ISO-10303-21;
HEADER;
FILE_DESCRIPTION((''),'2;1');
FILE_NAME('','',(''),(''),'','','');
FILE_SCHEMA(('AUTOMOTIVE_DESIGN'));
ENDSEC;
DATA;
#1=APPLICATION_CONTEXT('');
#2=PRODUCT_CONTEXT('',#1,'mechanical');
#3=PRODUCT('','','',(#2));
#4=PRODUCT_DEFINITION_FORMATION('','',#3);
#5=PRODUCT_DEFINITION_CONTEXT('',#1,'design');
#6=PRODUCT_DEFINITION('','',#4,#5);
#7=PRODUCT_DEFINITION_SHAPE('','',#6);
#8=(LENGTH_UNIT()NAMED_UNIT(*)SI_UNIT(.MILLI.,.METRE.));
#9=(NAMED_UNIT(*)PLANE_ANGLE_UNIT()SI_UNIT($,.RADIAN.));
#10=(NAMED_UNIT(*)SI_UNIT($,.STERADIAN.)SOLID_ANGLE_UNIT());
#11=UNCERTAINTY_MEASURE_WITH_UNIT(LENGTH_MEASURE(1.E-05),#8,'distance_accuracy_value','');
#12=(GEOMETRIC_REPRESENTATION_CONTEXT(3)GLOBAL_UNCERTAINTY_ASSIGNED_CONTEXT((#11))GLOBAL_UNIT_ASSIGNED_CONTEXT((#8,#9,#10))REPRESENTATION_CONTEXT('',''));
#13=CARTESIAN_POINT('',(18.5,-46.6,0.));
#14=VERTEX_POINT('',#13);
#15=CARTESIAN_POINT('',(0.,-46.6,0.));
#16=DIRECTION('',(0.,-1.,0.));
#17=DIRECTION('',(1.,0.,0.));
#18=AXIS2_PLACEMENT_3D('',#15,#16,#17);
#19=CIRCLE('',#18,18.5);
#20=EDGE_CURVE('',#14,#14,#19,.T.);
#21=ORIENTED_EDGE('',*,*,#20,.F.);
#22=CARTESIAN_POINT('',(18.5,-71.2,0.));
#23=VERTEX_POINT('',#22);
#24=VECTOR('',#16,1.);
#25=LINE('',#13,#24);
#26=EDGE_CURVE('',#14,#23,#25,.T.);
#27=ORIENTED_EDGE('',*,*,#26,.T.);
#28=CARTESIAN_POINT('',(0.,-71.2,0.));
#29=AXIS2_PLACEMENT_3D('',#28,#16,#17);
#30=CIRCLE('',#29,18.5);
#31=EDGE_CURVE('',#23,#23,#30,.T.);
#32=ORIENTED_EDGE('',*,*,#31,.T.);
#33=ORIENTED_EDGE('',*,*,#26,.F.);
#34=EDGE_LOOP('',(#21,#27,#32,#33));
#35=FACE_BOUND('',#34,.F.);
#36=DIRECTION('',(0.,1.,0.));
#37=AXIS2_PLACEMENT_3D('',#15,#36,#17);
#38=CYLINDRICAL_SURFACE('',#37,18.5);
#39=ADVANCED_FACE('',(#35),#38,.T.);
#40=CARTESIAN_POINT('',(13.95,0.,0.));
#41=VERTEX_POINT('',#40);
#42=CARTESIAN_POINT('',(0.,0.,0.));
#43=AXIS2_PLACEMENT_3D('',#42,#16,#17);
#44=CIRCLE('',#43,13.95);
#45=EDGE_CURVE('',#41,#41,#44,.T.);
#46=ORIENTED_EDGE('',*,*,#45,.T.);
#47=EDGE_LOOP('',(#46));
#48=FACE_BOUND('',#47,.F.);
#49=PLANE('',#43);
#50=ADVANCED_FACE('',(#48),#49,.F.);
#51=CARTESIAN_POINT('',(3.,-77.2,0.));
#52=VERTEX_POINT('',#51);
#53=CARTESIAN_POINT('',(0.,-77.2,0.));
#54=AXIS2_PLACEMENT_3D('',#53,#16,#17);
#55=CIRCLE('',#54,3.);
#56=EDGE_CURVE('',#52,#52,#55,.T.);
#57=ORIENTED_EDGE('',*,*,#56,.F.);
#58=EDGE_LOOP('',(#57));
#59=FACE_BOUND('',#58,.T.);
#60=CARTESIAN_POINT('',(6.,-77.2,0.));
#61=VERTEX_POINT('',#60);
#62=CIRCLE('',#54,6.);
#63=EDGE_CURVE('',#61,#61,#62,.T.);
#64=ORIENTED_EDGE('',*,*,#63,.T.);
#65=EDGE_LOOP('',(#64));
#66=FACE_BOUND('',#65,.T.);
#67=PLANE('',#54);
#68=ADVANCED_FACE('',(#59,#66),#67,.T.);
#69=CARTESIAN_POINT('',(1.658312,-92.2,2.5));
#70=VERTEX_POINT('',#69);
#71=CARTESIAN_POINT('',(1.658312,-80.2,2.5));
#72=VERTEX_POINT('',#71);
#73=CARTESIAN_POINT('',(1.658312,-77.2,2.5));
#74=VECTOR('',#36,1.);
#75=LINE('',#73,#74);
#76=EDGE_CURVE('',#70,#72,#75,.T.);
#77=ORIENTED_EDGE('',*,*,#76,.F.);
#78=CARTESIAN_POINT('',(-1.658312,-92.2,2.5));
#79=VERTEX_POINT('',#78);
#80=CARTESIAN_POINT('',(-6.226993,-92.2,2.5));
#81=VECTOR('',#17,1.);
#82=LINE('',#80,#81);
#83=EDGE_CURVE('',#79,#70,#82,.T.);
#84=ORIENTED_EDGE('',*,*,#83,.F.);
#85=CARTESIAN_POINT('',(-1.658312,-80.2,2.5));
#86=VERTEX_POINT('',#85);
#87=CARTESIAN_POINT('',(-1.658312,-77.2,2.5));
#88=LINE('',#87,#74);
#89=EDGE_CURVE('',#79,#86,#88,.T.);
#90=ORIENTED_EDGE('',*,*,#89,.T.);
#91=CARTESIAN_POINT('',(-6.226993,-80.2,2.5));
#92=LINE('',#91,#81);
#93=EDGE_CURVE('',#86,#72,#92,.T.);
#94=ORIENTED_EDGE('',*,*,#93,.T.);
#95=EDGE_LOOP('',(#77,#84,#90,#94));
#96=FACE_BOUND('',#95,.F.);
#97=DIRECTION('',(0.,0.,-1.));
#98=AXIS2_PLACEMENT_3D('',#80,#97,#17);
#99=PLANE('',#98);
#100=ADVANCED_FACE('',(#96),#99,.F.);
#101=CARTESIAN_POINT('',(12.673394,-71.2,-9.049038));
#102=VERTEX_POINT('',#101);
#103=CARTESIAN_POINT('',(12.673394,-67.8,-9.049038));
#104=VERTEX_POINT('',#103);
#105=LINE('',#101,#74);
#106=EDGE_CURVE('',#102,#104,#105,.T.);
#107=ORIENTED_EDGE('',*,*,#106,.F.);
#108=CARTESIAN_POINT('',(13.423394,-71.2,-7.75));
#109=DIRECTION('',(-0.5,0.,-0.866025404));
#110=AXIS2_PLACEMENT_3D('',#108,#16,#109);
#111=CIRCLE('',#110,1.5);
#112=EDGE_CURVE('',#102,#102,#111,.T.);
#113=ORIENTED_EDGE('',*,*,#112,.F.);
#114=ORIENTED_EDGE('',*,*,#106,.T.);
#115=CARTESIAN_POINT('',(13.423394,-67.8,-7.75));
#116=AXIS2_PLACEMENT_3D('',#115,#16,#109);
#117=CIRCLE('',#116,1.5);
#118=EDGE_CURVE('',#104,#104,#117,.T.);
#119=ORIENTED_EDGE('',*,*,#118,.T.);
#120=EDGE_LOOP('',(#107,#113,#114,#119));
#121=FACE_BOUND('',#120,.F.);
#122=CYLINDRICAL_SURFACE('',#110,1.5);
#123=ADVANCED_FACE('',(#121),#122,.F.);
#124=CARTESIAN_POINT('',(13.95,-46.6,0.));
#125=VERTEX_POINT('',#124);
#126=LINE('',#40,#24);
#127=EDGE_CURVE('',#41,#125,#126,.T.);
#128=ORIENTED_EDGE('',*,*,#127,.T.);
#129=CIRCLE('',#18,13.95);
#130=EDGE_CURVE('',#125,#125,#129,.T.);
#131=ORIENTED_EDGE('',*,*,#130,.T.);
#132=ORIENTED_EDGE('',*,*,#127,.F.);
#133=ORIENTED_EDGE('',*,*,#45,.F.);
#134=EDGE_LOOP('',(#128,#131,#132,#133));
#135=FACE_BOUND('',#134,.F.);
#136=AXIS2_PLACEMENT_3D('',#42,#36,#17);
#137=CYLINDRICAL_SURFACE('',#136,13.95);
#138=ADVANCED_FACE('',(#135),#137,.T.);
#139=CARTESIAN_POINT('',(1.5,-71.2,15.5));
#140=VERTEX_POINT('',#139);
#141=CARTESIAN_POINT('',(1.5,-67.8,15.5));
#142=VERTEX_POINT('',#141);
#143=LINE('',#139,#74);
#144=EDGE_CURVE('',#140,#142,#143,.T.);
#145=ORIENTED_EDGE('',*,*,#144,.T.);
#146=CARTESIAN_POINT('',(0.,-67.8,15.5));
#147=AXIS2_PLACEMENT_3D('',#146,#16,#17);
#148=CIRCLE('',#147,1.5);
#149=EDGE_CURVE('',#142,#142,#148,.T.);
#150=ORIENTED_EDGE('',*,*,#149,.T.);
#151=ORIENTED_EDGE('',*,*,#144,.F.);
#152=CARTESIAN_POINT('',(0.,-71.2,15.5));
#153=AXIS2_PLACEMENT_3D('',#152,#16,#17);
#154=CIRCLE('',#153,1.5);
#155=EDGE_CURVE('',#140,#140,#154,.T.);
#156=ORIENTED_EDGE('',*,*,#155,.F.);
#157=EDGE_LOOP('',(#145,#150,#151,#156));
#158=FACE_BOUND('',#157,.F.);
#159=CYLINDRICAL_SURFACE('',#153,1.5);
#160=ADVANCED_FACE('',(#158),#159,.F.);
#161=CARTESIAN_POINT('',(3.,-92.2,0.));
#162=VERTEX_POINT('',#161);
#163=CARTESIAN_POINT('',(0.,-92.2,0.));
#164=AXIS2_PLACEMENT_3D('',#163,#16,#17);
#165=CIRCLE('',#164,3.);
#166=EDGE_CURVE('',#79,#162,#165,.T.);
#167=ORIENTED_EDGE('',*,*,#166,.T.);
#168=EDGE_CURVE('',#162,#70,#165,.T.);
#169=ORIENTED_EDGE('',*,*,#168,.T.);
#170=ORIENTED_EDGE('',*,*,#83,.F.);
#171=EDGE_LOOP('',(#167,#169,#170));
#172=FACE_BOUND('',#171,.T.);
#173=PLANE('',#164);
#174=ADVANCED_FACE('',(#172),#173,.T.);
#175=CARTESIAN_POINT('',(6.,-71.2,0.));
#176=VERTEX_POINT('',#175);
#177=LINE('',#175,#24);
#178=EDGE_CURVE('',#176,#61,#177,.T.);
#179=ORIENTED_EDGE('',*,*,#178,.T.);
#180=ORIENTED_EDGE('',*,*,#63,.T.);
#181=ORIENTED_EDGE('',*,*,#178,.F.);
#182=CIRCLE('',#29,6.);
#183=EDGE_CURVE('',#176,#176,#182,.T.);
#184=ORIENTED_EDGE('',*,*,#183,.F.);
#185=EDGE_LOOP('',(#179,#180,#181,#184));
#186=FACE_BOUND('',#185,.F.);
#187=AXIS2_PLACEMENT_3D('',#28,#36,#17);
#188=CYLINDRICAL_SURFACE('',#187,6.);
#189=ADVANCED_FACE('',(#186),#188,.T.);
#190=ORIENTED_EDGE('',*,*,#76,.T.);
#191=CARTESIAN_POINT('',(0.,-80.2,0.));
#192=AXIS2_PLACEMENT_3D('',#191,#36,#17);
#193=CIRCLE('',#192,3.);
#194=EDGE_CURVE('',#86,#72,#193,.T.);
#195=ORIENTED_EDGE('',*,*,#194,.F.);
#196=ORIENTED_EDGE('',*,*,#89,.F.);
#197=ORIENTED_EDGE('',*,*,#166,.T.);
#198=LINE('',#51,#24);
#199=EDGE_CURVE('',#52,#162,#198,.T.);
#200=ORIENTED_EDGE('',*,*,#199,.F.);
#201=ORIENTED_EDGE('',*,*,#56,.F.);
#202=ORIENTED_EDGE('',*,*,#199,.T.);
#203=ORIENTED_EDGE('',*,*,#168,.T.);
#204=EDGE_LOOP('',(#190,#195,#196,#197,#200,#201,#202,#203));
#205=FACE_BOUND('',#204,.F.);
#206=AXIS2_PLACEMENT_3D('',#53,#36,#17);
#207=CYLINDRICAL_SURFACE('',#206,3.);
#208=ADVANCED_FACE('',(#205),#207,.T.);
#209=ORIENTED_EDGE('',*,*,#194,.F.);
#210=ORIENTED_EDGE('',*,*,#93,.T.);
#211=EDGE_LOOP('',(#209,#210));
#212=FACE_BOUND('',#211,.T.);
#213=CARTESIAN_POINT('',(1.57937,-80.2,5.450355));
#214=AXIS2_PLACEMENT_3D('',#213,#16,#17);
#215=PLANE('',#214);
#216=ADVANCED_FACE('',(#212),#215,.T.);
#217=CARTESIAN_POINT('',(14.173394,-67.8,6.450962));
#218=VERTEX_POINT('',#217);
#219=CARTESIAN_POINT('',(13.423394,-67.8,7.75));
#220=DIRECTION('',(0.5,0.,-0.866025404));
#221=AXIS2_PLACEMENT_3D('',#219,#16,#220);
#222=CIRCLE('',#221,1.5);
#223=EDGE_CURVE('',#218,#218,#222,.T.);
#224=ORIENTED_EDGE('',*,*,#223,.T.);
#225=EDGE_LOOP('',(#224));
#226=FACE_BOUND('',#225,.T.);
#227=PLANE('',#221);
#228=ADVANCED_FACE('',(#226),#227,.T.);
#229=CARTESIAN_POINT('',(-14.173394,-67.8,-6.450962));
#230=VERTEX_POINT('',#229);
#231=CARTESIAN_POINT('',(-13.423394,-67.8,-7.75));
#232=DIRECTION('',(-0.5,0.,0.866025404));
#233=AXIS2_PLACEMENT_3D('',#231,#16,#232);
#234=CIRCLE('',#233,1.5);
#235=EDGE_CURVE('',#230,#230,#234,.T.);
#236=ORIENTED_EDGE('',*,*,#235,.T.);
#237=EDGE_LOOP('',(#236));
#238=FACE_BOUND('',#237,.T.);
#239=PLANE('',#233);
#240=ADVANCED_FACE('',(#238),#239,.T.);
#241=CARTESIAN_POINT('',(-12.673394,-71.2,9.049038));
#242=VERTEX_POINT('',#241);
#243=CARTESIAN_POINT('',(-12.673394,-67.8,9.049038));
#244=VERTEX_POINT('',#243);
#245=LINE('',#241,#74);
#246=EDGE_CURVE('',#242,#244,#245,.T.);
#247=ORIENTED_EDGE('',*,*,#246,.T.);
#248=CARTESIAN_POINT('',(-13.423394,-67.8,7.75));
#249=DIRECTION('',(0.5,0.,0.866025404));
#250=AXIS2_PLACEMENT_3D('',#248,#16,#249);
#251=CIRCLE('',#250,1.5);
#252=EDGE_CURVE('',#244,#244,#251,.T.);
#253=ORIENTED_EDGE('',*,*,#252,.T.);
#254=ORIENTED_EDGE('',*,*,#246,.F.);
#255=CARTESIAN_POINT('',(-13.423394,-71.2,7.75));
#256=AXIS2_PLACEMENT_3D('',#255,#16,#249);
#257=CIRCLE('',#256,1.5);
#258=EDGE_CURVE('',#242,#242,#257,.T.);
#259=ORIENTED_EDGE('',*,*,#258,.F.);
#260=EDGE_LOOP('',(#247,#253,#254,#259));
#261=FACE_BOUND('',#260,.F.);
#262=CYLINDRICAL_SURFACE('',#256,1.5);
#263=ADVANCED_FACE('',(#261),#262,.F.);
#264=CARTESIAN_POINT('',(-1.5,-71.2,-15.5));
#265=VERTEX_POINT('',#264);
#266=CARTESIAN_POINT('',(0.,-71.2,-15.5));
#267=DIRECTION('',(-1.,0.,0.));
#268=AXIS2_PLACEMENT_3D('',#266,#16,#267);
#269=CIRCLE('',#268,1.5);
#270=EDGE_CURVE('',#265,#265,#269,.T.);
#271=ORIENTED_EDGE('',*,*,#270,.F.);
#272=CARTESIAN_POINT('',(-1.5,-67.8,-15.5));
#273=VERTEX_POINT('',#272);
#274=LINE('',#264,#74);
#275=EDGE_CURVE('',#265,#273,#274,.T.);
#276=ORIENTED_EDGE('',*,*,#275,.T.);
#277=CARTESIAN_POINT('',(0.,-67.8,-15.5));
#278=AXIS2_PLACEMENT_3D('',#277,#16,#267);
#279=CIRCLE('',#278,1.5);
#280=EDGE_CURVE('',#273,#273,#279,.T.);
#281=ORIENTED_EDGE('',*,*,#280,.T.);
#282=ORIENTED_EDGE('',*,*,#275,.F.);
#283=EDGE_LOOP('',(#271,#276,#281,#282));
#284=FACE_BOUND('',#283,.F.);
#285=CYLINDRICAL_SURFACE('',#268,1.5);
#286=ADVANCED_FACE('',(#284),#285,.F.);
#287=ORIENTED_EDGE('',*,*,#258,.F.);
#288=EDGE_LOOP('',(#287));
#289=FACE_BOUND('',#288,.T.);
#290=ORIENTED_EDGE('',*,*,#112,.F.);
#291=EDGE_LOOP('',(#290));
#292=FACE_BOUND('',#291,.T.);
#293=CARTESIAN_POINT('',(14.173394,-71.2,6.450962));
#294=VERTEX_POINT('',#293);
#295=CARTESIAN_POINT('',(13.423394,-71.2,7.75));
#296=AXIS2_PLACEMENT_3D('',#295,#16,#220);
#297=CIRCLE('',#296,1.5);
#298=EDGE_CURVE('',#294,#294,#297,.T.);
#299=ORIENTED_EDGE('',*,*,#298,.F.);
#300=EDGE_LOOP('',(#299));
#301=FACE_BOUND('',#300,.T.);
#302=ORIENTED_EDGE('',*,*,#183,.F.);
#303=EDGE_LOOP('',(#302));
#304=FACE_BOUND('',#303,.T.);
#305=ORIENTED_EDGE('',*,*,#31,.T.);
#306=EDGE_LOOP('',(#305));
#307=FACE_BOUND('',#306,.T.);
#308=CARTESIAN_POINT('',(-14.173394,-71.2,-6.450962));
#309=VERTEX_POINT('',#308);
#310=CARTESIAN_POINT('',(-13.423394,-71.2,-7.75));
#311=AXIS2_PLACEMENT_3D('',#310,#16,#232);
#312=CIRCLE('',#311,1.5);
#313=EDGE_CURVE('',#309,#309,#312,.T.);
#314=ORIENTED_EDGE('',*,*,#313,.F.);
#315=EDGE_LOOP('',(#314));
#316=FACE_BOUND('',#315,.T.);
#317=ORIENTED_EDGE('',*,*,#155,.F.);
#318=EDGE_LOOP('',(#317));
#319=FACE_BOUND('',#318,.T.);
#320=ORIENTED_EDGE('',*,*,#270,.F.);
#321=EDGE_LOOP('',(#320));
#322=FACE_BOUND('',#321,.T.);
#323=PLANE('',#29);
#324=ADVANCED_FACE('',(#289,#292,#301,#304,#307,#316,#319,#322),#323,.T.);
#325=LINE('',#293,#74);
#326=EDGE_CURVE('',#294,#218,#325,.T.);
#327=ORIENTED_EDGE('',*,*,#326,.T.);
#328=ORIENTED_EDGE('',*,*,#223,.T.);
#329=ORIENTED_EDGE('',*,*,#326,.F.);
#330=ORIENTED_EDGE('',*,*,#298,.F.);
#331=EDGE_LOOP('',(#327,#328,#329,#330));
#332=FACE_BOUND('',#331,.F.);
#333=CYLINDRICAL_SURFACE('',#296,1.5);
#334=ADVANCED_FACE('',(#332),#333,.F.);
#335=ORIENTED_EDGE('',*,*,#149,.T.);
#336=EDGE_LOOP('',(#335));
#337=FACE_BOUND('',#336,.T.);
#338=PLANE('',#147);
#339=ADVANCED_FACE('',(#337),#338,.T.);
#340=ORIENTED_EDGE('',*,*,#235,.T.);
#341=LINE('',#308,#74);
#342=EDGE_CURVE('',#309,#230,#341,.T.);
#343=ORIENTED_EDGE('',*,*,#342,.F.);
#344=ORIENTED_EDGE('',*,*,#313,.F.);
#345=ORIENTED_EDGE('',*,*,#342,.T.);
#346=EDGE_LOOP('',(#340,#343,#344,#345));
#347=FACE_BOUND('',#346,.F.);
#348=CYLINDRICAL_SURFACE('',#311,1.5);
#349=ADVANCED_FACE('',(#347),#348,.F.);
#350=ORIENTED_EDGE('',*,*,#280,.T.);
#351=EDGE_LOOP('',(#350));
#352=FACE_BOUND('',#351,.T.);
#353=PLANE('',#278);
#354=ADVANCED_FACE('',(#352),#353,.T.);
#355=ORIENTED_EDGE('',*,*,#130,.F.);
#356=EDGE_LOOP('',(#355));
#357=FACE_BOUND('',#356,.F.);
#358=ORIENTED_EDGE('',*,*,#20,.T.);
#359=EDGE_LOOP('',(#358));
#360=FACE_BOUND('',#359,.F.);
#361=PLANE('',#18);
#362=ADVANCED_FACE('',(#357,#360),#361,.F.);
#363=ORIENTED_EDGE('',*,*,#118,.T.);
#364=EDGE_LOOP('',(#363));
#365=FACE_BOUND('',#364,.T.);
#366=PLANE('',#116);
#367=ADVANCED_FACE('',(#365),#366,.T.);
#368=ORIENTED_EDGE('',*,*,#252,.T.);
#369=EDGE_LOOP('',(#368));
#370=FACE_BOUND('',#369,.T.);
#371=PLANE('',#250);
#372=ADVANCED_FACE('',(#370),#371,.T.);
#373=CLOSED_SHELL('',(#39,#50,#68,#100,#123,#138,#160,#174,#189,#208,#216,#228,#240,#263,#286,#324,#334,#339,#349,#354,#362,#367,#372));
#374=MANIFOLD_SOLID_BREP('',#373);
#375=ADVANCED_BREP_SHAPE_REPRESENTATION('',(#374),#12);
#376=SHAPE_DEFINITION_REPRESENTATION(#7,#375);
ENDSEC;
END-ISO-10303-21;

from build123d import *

# Parameters (mm, degrees)
F0_R             = 13.95
F1_DEPTH         = 46.6
F2_R             = 18.5
F2_R_2           = 13.95
F3_DEPTH         = 24.6
F4_R             = 6
F5_DEPTH         = 6
F6_R             = 3
F7_DEPTH         = 15
F9_DEPTH         = 12
F10_R            = 1.5
F11_DEPTH        = 3.4
F11_COPIES_COUNT = 6


# Not quite as in the source:
# - a pattern or mirror of a feature is missing from the dataset's text; its kind, count and spacing are read off the source's solid


with BuildPart() as f1:
    # F0 (on Front) → F1 (new body)
    with BuildSketch(Plane.XZ):
        Circle(F0_R)
    extrude(amount=F1_DEPTH)

    # F2 (on face) → F3 (join)
    with BuildSketch(Plane.XZ.offset(46.6)):
        Circle(F2_R)
        Circle(F2_R_2, mode=Mode.SUBTRACT)
        Circle(F2_R_2)
    extrude(amount=F3_DEPTH)

    # F4 (on face) → F5 (join)
    with BuildSketch(Plane.XZ.offset(71.2)):
        Circle(F4_R)
    extrude(amount=F5_DEPTH)

    # F6 (on face) → F7 (join)
    with BuildSketch(Plane.XZ.offset(77.2)):
        Circle(F6_R)
    extrude(amount=F7_DEPTH)

    # F8 (on face) → F9 (cut)
    with BuildSketch(Plane.XZ.offset(92.2)):
        with BuildLine():
            Line((-6.2269931659, 8.3767892187), (-6.2269931659, 2.5))
            Line((-6.2269931659, 2.5), (-1.6583123952, 2.5))
            ThreePointArc((-1.6583123952, 2.5), (0, 3), (1.6583123952, 2.5))
            Line((1.6583123952, 2.5), (9.3986019492, 2.5))
            Line((9.3986019492, 2.5), (9.3986019492, 8.3767892187))
            Line((9.3986019492, 8.3767892187), (-6.2269931659, 8.3767892187))
        make_face()
        with BuildLine():
            ThreePointArc((1.6583123952, 2.5), (0, 3), (-1.6583123952, 2.5))
            Line((-1.6583123952, 2.5), (1.6583123952, 2.5))
        make_face()
    extrude(amount=-F9_DEPTH, mode=Mode.SUBTRACT)

    # F10 (on face) → F11 (cut)
    with BuildSketch(Plane.XZ.offset(71.2)):
        with Locations((0, 15.5)):
            Circle(F10_R)
    f11 = extrude(amount=-F11_DEPTH, mode=Mode.SUBTRACT)

    # F11_copies: F11 ×6 about axis
    f11_copies_axis = Axis((0, 0, 0), (0, 1, 0))
    for i in range(1, F11_COPIES_COUNT):
        add(f11.rotate(f11_copies_axis, i * 360 / F11_COPIES_COUNT), mode=Mode.SUBTRACT)


solid = f1.part
